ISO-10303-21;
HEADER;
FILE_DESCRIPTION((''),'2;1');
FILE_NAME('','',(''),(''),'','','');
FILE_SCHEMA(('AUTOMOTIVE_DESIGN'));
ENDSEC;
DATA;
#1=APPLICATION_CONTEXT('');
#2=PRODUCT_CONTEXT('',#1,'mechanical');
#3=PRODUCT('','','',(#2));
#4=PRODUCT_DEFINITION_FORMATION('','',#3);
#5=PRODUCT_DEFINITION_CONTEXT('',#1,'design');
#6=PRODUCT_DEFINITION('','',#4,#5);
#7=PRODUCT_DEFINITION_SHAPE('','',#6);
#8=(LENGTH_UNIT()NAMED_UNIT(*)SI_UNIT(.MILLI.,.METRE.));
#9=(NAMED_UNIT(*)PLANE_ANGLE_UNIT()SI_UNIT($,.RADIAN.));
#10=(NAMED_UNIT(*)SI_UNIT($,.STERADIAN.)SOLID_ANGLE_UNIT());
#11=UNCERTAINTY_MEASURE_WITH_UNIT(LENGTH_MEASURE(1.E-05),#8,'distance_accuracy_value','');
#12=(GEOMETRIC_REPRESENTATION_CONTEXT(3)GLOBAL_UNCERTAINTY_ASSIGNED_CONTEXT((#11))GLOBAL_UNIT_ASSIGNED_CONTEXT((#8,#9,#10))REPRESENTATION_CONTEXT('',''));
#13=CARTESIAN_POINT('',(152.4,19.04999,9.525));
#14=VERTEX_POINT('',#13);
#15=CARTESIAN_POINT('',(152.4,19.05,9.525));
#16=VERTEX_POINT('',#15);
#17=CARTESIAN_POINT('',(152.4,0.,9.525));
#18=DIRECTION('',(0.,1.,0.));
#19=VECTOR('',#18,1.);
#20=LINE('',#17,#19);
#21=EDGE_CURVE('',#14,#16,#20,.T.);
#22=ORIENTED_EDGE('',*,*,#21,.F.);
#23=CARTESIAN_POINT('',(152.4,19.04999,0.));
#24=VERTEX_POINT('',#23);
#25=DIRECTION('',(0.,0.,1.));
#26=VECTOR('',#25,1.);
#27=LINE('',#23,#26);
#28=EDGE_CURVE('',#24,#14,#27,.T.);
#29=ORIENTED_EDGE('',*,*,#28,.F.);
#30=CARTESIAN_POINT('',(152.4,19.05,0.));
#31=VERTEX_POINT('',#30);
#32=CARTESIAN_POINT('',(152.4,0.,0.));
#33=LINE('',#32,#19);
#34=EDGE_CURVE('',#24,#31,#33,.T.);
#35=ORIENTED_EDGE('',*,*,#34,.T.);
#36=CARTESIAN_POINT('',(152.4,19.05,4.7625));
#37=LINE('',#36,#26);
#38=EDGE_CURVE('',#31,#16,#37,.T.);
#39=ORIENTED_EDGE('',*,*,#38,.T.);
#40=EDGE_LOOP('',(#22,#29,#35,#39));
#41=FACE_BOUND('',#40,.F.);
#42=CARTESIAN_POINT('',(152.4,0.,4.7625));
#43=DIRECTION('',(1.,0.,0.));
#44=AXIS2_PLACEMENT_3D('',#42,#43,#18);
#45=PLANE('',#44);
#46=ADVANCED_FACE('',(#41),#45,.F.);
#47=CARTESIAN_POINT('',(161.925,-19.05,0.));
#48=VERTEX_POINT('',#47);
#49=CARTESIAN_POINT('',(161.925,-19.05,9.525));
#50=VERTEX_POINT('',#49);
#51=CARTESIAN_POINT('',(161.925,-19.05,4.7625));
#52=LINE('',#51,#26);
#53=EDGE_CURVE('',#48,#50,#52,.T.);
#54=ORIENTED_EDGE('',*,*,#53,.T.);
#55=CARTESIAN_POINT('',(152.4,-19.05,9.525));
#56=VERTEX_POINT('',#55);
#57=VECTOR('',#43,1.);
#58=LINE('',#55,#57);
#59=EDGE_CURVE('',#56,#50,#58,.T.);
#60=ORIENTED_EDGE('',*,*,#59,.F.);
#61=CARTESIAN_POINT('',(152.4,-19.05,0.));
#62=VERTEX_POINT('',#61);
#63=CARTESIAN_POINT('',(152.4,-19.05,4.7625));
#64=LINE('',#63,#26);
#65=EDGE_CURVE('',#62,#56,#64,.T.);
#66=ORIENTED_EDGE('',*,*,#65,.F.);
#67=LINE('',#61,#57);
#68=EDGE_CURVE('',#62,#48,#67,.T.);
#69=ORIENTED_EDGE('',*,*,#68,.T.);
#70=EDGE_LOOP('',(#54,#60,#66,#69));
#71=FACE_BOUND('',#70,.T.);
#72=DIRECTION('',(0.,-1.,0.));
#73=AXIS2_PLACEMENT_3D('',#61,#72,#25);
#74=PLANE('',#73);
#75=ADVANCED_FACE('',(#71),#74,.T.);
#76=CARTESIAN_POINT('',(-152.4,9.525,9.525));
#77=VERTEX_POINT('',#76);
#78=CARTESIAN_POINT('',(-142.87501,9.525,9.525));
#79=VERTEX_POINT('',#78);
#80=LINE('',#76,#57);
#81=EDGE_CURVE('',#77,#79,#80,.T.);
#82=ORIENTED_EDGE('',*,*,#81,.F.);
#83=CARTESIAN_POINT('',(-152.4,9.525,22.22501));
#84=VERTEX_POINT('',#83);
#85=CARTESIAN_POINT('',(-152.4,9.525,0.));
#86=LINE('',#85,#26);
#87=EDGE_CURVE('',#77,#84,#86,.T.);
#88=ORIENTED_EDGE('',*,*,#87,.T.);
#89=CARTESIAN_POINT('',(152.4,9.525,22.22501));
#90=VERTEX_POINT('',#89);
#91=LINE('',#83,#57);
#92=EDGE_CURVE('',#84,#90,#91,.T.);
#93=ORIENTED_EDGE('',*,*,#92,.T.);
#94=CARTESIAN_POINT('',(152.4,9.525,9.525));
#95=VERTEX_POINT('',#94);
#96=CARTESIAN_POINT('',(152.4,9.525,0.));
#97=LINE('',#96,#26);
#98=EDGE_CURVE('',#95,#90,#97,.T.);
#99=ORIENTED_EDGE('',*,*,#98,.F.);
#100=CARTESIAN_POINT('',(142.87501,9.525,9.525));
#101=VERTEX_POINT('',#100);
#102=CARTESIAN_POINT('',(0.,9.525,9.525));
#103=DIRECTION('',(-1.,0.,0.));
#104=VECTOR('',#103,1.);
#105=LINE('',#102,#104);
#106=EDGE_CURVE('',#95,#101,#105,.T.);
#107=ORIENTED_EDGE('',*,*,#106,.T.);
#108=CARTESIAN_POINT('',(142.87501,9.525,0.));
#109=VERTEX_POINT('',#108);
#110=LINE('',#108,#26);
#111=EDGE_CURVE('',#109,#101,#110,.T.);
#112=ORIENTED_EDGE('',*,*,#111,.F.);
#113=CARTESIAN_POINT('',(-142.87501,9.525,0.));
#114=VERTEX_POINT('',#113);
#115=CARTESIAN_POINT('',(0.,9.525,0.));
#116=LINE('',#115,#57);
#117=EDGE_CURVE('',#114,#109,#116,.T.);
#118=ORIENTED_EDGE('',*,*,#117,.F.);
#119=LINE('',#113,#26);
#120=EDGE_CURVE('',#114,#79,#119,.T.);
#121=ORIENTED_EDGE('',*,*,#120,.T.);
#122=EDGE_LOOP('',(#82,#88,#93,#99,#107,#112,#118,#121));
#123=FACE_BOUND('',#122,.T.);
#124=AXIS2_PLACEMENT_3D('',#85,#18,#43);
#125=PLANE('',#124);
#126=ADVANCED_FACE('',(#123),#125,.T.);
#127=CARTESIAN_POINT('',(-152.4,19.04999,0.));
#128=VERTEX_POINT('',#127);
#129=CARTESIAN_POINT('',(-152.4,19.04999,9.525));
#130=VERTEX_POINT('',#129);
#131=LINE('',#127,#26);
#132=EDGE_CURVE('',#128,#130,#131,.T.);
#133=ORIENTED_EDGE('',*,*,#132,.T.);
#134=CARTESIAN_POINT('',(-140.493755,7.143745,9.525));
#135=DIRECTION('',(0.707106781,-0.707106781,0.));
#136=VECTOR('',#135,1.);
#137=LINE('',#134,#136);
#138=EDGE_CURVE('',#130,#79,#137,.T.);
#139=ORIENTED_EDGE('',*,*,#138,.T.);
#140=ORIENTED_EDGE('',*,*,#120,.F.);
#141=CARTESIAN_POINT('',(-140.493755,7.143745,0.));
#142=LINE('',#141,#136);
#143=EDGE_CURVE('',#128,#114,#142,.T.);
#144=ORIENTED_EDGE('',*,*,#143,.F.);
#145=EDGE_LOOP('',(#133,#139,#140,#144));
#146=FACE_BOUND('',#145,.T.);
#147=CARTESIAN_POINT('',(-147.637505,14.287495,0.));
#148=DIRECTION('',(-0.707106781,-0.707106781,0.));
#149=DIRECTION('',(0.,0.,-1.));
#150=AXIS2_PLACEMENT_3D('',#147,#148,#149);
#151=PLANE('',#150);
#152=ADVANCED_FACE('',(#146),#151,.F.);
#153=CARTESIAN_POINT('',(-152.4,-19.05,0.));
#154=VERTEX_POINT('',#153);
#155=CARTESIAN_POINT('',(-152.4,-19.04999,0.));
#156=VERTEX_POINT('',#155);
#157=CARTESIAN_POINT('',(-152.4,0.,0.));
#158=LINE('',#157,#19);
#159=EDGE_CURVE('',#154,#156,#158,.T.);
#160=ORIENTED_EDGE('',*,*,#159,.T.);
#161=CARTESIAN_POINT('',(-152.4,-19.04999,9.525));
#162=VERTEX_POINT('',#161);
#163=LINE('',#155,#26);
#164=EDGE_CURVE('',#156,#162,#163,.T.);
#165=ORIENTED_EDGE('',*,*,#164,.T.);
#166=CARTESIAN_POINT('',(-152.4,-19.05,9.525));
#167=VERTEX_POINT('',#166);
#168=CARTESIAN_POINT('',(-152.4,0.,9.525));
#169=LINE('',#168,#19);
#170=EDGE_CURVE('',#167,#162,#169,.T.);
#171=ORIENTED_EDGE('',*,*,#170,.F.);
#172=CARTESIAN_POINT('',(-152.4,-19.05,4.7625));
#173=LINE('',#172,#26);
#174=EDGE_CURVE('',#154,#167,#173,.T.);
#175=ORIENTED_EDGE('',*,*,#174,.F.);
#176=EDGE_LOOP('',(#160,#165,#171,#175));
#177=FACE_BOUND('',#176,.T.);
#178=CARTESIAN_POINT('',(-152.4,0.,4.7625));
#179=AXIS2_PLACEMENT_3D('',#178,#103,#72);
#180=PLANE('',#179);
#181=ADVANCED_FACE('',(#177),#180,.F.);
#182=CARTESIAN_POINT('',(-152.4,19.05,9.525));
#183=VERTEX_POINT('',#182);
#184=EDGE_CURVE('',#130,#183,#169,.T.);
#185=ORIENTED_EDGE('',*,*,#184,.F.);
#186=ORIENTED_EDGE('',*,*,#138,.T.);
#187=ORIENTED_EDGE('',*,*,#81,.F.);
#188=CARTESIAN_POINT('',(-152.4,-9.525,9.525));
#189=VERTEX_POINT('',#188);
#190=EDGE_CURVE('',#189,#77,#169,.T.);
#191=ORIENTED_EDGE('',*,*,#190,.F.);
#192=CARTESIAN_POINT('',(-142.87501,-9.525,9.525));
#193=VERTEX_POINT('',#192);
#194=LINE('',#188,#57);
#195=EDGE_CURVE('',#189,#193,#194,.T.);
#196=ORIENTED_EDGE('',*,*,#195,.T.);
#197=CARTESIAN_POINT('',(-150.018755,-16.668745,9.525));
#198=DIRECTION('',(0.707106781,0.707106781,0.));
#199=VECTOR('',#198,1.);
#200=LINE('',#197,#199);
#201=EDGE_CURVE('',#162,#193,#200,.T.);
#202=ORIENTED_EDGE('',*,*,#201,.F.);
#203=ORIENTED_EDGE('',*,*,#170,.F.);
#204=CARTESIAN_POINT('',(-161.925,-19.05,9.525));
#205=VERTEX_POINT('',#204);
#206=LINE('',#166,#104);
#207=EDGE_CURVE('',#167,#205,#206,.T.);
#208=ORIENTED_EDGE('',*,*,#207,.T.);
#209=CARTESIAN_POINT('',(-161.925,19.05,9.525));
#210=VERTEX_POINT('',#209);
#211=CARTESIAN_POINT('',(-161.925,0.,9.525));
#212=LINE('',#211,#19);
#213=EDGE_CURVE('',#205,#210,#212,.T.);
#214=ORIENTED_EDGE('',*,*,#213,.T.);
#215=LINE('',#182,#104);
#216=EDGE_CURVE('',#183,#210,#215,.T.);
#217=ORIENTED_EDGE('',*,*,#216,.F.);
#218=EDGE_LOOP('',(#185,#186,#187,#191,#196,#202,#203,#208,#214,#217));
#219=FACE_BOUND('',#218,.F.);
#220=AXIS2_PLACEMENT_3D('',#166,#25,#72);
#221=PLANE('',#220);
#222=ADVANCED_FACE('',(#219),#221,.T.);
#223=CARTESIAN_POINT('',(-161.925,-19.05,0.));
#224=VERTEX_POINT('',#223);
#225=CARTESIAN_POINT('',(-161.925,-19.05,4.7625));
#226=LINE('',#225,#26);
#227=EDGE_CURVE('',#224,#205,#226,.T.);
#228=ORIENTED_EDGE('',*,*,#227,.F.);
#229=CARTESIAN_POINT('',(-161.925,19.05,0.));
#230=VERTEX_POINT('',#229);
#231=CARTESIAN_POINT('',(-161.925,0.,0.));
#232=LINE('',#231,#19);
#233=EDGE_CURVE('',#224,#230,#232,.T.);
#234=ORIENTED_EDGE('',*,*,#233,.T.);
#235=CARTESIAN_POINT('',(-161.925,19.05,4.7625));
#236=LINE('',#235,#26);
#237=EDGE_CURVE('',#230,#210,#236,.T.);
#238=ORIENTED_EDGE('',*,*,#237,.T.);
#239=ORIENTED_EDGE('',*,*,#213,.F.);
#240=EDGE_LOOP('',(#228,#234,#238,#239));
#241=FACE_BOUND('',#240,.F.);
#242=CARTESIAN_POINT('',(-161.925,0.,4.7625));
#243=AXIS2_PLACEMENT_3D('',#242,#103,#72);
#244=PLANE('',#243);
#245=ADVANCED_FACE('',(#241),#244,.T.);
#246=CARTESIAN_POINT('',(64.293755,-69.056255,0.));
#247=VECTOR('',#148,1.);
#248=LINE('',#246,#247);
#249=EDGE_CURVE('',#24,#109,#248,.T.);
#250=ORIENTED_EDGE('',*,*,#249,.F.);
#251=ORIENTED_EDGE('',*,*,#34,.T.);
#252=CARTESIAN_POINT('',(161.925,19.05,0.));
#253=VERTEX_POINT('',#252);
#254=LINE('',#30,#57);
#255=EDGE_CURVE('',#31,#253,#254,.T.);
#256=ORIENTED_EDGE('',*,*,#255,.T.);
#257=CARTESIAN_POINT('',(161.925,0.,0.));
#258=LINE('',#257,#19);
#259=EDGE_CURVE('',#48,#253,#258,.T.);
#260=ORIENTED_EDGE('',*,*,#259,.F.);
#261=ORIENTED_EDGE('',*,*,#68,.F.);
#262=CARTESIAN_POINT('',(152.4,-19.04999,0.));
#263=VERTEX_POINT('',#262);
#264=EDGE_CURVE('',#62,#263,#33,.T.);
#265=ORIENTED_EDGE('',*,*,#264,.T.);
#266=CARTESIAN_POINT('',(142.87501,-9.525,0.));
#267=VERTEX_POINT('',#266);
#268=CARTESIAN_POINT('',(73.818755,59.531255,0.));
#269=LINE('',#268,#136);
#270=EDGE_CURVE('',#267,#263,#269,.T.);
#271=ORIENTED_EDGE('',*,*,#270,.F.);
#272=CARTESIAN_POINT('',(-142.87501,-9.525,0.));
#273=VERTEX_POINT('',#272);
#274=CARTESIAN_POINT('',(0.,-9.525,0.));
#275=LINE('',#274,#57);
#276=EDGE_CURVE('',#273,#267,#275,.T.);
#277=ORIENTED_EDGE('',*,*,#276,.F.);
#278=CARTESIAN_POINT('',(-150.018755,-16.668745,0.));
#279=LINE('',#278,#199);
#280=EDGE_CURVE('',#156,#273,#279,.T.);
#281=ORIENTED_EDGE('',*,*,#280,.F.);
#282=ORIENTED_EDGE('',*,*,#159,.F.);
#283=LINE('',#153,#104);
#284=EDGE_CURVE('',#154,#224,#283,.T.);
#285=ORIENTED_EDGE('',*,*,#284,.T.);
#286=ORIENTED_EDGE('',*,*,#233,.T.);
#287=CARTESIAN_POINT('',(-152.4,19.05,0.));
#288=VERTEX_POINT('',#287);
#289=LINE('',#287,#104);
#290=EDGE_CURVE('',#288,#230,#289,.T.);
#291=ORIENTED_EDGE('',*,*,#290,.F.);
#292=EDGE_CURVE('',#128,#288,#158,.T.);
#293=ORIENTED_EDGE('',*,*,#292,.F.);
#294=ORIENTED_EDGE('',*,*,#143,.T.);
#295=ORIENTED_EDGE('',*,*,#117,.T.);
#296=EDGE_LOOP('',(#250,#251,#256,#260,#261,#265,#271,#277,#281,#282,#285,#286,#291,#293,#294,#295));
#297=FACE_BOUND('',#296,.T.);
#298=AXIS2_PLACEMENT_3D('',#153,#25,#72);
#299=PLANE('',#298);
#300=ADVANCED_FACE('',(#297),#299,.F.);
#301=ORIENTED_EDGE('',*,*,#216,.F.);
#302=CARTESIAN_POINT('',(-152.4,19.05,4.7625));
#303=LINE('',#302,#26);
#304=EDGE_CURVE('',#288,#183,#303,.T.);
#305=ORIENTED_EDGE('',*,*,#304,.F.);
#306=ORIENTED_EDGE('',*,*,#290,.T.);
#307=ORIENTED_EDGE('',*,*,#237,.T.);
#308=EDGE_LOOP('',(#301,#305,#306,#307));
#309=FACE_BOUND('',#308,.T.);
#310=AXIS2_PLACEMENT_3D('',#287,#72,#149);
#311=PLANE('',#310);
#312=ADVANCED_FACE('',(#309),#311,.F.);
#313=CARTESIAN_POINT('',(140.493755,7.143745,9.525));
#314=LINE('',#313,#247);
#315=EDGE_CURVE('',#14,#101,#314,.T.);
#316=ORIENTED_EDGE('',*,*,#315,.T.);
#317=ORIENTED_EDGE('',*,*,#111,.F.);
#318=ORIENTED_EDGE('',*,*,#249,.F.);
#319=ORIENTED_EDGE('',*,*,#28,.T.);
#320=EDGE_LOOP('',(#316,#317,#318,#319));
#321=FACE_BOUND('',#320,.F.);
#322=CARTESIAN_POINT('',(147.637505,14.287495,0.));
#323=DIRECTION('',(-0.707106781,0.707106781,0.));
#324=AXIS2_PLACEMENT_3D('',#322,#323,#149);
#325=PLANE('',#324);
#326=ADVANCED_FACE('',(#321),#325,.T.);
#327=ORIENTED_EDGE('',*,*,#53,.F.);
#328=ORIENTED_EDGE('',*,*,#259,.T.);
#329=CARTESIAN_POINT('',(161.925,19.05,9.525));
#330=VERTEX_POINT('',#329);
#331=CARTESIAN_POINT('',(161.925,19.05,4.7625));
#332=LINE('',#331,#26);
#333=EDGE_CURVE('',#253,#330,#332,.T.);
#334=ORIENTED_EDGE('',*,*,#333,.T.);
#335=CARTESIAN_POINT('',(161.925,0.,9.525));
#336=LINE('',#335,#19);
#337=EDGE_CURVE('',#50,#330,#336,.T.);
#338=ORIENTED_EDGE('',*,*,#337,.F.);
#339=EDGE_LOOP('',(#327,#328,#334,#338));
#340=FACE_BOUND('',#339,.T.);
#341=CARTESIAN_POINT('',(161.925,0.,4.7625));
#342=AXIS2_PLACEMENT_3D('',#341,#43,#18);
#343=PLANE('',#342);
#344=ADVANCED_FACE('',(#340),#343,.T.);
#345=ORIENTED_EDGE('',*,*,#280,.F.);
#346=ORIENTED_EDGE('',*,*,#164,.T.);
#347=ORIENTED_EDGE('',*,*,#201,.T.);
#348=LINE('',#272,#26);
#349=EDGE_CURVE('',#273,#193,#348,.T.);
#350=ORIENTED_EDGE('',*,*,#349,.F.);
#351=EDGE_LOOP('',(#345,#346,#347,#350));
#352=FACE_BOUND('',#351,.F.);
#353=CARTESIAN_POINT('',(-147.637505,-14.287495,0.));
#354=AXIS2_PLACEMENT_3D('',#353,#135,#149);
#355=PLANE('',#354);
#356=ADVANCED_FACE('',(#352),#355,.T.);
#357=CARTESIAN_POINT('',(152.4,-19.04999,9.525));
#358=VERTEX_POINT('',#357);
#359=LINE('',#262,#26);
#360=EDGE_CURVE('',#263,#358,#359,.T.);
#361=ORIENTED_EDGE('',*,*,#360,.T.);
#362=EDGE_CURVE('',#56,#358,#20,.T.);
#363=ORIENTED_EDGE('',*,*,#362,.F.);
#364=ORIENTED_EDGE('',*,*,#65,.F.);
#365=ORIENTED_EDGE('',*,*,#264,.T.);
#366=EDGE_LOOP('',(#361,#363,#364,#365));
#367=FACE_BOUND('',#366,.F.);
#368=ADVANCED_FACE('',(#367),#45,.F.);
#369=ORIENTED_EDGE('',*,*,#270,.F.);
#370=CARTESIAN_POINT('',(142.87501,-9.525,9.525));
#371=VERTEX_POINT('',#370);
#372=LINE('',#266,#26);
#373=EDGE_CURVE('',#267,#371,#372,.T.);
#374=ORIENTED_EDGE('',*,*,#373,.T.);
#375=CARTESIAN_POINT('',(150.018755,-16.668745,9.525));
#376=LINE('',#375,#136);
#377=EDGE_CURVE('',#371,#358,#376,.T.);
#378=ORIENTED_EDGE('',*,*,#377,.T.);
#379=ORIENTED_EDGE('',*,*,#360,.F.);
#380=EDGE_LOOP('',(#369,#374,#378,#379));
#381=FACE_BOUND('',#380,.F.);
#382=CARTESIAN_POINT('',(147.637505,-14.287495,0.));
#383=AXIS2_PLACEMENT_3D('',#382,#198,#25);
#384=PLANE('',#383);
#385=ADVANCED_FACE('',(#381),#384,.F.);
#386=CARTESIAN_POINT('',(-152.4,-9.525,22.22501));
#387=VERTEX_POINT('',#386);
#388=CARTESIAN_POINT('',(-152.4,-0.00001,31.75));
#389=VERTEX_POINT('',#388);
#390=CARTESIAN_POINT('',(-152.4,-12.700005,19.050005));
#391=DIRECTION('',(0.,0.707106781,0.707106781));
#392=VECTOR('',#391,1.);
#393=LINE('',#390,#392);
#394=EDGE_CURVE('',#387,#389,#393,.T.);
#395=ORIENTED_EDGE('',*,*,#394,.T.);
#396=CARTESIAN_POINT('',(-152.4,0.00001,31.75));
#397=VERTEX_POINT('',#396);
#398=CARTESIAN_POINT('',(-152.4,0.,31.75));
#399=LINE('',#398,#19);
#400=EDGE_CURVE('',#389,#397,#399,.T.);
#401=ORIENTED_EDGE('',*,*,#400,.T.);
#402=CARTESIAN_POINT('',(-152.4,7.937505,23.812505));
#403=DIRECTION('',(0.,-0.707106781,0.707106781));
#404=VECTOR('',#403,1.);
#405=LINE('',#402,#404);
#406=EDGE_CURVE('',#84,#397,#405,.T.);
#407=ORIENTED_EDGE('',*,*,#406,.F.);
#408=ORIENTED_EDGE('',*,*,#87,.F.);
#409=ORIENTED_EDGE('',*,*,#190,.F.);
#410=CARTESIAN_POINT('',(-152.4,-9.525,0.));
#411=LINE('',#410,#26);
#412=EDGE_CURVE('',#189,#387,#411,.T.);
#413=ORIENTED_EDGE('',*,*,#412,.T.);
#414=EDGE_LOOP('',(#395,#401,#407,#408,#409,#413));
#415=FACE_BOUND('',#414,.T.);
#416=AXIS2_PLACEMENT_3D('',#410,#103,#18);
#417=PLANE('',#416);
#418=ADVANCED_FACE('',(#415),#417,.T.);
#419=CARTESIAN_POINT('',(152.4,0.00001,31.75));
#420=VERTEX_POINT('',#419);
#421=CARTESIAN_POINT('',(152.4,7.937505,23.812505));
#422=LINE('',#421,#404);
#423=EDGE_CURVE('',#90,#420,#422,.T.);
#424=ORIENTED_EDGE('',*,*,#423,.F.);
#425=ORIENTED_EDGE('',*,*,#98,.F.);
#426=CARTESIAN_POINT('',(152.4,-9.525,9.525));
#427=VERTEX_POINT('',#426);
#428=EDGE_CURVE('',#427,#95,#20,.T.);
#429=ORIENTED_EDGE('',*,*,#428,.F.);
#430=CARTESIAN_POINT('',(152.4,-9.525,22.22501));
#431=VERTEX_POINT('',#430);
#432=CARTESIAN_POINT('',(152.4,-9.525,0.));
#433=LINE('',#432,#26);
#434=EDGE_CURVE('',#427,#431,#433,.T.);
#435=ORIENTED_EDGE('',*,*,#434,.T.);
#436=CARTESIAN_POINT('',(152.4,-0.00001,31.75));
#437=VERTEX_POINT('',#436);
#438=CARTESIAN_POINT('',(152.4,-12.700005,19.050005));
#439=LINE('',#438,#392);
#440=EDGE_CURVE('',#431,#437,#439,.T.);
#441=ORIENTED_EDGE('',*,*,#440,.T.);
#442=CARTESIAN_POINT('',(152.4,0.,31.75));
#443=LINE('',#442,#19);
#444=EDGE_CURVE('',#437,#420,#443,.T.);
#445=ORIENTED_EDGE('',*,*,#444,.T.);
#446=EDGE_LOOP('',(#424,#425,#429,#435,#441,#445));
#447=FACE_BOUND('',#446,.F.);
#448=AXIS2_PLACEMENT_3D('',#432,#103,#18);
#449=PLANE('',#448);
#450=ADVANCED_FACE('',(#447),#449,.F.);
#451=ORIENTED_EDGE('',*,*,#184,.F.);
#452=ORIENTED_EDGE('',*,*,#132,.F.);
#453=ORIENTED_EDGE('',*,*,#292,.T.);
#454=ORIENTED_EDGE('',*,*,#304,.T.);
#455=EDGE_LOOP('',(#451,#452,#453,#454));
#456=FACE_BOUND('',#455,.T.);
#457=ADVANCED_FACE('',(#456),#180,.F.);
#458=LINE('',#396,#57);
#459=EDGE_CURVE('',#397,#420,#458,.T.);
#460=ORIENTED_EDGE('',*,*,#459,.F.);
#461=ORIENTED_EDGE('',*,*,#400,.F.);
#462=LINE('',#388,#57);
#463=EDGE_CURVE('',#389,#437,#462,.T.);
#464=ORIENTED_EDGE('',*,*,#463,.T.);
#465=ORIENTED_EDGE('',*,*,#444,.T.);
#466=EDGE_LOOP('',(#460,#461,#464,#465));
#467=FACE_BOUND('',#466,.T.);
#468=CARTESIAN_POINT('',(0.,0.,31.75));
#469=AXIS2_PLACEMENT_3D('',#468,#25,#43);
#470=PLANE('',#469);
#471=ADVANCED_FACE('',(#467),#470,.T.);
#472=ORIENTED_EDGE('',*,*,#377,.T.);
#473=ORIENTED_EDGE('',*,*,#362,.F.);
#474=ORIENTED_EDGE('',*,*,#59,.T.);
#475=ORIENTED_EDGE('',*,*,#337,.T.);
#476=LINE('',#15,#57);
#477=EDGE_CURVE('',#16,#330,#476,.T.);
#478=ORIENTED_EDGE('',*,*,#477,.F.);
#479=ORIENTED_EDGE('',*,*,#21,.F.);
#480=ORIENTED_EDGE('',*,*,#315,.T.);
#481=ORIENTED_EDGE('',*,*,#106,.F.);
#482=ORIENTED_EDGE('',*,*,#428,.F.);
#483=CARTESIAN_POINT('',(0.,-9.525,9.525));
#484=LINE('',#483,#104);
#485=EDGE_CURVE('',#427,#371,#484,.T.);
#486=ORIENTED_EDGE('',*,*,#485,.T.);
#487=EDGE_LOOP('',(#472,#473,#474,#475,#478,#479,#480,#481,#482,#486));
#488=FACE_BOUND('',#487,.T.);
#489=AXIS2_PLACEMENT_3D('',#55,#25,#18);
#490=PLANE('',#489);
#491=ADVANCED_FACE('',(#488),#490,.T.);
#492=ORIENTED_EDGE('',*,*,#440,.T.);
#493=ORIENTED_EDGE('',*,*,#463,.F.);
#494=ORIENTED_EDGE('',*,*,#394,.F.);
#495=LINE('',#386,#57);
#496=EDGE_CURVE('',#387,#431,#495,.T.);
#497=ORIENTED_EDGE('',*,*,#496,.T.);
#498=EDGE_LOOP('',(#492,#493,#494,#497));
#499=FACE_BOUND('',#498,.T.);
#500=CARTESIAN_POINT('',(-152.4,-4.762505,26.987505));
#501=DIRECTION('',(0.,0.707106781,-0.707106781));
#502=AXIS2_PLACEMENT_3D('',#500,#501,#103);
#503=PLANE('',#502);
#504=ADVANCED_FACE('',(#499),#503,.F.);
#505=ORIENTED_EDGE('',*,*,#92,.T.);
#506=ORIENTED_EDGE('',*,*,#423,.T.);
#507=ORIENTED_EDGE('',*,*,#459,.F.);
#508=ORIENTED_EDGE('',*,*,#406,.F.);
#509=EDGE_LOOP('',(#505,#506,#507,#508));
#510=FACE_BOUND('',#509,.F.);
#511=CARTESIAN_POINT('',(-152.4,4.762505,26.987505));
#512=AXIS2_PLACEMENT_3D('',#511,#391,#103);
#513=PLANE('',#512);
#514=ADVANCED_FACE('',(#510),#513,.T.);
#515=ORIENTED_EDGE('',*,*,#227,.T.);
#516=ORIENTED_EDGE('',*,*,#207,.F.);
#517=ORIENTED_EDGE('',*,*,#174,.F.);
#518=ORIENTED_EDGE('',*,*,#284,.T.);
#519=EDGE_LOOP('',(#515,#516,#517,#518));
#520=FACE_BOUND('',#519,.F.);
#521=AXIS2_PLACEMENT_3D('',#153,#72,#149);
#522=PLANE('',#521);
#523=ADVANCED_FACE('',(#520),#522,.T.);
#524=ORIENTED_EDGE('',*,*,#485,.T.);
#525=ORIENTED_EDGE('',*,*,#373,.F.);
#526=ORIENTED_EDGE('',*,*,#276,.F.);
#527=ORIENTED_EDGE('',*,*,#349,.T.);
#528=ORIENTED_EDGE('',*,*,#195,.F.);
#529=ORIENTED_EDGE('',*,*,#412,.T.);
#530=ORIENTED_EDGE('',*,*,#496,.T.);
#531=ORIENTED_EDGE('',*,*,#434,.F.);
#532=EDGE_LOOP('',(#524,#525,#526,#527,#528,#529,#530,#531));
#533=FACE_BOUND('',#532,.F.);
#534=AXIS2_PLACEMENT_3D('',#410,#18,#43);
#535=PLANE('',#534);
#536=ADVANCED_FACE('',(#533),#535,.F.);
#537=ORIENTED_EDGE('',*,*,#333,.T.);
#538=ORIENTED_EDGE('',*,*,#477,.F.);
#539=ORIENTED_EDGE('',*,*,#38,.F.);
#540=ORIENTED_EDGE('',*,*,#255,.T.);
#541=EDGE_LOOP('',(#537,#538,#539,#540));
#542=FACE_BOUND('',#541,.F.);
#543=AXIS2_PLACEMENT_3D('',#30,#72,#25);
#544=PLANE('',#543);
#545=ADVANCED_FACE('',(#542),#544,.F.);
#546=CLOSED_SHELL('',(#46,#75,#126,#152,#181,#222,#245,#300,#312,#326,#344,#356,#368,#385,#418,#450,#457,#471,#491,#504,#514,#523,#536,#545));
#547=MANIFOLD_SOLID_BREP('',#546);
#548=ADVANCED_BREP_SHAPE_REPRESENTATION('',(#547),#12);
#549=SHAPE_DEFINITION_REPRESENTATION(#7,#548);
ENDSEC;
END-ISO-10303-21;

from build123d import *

# Parameters (mm, degrees)
F0_W     = 304.8
F0_H     = 19.05
F1_DEPTH = 31.75
F2_SIZE  = 9.52499
F3_W     = 38.1
F3_H     = 9.525
F4_DEPTH = 9.525
F5_SIZE  = 9.52499


# Not quite as in the source:
# - a fillet or chamfer is up to 0.001 mm smaller than in the source, because OpenCascade refuses the exact size
# - a pattern or mirror of a feature is missing from the dataset's text; its kind, count and spacing are read off the source's solid


with BuildPart() as f1:
    # F0 (on Top) → F1 (new body)
    with BuildSketch(Plane.XY):
        Rectangle(F0_W, F0_H)
    extrude(amount=F1_DEPTH)

    # F2 (size 9.525 in the source; OpenCascade refuses exactly that, so slightly less here)
    f2_edges = [f1.edges().sort_by_distance(p)[0] for p in [
        (0, -9.525, 31.75),
        (0, 9.525, 31.75),
    ]]
    chamfer(f2_edges, length=F2_SIZE)

    # F3 (on face) → F4 (join)
    with BuildSketch(Plane.YZ.offset(152.4)):
        with Locations((0, 4.7625)):
            Rectangle(F3_W, F3_H)
    f4 = extrude(amount=F4_DEPTH)

    # F4_copies: F4 across plane
    add(f4.mirror(Plane(origin=(0, 0, 0), x_dir=(0, 0, -1), z_dir=(-1, 0, 0))))

    # F5 (size 9.525 in the source; OpenCascade refuses exactly that, so slightly less here)
    f5_edges = [f1.edges().sort_by_distance(p)[0] for p in [
        (152.4, -9.525, 4.7625),
        (152.4, 9.525, 4.7625),
        (-152.4, -9.525, 4.7625),
        (-152.4, 9.525, 4.7625),
    ]]
    chamfer(f5_edges, length=F5_SIZE)


solid = f1.part
